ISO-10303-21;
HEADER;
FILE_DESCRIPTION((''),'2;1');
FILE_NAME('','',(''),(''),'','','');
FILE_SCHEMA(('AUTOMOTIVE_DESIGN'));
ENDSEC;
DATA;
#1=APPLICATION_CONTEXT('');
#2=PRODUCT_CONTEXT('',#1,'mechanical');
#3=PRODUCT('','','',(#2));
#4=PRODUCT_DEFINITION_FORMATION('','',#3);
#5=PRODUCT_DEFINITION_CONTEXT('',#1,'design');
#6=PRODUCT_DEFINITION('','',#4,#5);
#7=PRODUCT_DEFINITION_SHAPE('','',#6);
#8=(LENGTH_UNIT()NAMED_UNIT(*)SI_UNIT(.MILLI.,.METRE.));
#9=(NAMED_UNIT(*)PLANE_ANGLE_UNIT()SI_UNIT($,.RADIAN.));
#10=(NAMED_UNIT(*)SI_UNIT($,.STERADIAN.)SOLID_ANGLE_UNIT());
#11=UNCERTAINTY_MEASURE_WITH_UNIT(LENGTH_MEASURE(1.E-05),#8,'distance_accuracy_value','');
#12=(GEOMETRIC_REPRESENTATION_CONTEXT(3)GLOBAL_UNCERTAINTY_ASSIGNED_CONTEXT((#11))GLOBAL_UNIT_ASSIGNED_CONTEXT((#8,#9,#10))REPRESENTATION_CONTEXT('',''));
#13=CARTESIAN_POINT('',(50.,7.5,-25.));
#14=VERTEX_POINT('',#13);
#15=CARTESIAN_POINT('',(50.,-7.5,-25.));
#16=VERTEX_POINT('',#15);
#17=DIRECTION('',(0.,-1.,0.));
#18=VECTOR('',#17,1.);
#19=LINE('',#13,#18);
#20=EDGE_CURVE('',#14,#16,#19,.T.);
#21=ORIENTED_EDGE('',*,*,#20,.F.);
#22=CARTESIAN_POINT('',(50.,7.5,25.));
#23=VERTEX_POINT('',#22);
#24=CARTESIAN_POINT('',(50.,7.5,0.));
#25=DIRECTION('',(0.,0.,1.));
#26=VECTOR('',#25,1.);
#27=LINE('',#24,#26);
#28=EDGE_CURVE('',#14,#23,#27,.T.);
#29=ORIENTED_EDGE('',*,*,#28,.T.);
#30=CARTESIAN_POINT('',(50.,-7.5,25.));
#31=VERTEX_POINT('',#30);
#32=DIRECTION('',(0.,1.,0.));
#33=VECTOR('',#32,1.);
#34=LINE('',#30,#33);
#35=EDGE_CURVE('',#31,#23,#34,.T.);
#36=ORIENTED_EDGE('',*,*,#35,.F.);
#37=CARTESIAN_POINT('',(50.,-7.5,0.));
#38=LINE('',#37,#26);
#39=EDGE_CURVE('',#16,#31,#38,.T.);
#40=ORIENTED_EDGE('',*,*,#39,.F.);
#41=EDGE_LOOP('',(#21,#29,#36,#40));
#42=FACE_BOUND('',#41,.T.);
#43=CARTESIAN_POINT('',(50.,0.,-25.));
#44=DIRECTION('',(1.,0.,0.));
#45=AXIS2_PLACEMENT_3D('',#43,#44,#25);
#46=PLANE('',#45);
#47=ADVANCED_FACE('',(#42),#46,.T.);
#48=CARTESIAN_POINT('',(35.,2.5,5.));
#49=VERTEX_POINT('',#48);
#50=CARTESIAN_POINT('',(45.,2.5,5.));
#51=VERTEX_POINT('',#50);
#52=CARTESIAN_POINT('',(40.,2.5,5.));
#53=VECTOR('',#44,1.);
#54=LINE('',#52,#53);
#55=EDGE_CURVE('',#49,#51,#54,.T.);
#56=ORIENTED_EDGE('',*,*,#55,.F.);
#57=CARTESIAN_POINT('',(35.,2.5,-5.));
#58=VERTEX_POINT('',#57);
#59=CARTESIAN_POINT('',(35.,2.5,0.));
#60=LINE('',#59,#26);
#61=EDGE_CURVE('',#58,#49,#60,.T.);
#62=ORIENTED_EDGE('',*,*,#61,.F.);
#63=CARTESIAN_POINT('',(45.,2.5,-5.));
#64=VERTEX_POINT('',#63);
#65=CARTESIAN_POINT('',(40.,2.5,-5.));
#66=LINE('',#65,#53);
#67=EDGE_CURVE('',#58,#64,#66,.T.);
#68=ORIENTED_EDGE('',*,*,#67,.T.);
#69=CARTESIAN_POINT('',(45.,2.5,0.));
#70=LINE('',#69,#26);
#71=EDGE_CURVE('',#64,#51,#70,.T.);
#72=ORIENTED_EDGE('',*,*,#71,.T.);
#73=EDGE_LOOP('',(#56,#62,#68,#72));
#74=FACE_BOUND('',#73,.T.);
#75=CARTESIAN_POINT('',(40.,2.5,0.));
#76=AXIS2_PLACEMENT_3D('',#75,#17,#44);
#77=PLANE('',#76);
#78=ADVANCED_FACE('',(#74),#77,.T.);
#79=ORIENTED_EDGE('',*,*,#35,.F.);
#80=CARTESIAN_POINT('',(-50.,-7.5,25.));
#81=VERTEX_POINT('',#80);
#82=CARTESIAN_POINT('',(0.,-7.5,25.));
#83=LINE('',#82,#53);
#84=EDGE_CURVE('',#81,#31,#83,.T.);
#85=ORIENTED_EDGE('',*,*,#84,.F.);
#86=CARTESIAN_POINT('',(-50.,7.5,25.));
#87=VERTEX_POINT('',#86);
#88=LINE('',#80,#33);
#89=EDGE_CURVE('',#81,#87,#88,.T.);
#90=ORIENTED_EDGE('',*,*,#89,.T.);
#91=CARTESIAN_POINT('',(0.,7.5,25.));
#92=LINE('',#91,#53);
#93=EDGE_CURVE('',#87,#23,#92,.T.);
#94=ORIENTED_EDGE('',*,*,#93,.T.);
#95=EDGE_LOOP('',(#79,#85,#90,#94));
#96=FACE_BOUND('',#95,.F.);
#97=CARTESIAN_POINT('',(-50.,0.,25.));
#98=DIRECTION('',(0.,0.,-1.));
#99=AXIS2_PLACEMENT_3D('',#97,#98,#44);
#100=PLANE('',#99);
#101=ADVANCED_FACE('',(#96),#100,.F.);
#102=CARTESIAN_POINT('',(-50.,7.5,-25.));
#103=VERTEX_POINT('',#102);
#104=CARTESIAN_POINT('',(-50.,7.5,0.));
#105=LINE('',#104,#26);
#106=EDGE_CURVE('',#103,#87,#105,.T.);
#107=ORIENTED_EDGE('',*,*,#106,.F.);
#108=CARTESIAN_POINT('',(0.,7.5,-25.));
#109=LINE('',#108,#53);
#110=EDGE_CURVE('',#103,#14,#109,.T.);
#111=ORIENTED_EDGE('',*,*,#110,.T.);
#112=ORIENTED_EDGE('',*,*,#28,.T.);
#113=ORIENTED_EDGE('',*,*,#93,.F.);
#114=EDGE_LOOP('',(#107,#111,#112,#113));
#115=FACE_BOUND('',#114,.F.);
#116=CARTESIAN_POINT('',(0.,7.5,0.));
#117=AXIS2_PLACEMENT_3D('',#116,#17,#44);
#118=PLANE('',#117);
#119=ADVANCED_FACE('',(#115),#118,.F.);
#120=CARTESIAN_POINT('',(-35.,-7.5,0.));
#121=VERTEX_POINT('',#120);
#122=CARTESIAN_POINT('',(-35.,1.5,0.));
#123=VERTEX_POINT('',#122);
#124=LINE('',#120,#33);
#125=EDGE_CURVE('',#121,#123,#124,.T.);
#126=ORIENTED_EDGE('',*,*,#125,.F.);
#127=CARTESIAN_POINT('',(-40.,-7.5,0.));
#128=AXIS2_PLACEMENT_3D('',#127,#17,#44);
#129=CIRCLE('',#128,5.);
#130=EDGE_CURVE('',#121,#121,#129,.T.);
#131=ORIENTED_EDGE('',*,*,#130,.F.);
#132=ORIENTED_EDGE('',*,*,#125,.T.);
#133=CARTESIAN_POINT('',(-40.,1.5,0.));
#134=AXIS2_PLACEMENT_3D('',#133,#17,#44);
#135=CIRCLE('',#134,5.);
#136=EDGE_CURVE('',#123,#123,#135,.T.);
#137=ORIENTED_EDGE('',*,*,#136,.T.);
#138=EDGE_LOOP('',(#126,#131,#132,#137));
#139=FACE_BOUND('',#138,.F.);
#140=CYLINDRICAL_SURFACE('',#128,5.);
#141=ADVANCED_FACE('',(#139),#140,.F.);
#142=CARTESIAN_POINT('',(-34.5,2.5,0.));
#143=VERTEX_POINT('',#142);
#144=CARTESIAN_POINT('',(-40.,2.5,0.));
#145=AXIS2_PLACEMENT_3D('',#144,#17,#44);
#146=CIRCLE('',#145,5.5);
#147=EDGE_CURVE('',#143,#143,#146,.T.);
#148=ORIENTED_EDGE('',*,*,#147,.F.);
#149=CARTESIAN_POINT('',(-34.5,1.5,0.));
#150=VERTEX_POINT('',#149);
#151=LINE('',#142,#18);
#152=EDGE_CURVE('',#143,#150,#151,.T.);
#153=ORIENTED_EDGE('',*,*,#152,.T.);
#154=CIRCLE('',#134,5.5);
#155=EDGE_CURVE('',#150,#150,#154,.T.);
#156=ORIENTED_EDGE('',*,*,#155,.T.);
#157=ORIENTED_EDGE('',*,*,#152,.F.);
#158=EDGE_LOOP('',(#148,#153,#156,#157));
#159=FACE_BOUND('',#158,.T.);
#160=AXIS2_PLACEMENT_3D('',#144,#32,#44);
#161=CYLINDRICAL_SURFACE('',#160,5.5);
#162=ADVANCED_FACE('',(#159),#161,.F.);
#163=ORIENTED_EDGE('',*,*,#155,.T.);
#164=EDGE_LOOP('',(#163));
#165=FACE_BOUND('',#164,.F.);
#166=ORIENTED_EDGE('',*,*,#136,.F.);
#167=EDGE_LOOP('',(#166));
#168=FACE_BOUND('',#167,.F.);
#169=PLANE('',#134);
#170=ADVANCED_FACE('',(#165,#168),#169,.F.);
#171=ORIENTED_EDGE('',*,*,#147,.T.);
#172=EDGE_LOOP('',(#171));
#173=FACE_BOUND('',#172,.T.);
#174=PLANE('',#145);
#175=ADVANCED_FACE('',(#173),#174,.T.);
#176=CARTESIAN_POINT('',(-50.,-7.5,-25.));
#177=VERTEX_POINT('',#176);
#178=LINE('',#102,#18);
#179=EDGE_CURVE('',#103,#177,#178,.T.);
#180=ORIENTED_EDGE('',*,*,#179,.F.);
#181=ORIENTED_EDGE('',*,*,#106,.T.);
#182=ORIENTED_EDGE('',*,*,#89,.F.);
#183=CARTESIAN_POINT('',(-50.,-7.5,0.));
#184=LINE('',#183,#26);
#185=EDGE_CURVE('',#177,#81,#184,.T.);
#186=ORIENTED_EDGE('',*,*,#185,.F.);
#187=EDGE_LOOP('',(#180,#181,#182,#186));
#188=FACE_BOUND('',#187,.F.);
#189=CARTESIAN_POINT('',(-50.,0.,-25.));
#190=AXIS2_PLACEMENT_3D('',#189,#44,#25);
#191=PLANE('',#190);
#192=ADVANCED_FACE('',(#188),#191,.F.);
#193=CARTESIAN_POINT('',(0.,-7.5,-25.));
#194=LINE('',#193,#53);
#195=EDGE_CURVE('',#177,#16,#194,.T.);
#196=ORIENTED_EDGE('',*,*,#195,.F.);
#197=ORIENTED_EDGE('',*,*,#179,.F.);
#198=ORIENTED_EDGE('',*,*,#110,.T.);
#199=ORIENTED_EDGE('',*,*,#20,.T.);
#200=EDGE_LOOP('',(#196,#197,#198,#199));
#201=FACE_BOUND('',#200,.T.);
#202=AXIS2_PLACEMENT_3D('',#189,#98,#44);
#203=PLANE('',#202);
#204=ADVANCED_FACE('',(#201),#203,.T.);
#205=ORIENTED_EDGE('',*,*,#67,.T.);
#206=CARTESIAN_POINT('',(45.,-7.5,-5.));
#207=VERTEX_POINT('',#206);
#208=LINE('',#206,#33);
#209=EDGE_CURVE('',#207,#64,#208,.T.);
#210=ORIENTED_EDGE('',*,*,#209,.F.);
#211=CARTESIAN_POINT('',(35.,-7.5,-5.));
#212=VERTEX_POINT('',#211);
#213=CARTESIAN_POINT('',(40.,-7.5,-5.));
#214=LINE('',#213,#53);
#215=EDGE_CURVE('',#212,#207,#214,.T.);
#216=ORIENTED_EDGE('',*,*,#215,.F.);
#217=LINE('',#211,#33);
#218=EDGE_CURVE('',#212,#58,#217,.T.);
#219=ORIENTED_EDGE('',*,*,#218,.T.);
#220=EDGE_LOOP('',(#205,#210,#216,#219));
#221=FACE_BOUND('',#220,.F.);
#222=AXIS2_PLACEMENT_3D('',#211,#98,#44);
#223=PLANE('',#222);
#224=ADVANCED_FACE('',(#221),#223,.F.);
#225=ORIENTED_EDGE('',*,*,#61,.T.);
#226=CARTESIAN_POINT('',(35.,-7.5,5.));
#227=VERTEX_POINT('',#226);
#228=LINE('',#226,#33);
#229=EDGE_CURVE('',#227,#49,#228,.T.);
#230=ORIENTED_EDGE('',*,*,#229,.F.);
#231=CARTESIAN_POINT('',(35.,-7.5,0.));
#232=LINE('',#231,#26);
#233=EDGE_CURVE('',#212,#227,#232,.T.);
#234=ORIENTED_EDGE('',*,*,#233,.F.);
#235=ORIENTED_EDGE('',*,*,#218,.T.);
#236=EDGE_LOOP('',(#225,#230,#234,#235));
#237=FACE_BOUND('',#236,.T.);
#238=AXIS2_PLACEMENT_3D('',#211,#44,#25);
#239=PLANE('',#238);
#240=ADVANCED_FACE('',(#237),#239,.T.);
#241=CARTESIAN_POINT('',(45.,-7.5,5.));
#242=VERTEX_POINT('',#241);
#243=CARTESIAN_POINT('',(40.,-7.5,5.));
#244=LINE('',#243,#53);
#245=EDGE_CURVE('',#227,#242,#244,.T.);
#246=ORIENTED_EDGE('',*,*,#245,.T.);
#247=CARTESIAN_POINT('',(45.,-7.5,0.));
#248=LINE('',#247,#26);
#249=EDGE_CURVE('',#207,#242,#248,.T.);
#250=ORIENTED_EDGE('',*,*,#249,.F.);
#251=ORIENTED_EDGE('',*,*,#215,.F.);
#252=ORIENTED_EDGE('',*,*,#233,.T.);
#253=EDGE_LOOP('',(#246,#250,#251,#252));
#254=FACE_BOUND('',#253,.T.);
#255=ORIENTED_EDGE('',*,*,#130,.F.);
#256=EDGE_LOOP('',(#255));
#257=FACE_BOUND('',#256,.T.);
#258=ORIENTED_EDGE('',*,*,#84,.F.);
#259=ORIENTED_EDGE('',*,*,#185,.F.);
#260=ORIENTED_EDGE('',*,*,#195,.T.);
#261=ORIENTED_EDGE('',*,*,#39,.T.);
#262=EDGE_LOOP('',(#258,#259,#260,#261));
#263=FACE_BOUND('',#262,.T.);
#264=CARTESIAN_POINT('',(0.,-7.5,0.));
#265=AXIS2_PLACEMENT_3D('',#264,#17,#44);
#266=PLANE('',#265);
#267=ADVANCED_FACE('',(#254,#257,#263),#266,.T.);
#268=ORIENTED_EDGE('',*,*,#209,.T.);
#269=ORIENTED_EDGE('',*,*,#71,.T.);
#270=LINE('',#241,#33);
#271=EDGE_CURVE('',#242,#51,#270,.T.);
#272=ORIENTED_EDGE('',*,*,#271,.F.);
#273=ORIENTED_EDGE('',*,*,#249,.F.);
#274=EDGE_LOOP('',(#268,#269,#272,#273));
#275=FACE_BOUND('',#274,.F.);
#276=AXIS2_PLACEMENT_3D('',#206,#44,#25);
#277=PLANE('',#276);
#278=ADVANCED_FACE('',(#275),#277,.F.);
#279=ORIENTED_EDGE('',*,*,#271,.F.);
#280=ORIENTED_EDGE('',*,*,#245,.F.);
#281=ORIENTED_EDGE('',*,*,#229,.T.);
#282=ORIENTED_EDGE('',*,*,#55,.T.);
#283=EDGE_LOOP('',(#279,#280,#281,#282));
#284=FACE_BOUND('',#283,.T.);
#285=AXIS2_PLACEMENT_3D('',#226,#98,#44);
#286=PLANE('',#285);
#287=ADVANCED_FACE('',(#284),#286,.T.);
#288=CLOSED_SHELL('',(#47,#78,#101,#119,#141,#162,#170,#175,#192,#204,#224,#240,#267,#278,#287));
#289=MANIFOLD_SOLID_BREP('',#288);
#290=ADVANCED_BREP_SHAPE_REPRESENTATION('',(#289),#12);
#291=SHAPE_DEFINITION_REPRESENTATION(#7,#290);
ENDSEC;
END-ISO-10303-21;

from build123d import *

# Parameters (mm, degrees)
F0_W     = 100
F0_H     = 50
F1_DEPTH = 7.5
F2_R     = 5
F2_W     = 10
F2_H     = 10
F3_DEPTH = 10
F4_R     = 5.5
F5_DEPTH = 1


# Not quite as in the source:
# - a feature names something its author has since deleted; it is built from what else it names


with BuildPart() as f1:
    # F0 (on Front) → F1 (new body, symmetric)
    with BuildSketch(Plane.XZ):
        Rectangle(F0_W, F0_H)
    extrude(amount=F1_DEPTH, both=True)

    # F2 (on face) → F3 (cut)
    with BuildSketch(Plane.XZ.offset(7.5)):
        with Locations((-40, 0)):
            Circle(F2_R)
        with Locations((40, 0)):
            Rectangle(F2_W, F2_H)
    extrude(amount=-F3_DEPTH, mode=Mode.SUBTRACT)

    # F4 (on face) → F5 (cut)
    with BuildSketch(Plane.XZ.offset(-2.5)):
        with Locations((-40, 0)):
            Circle(F4_R)
    extrude(amount=F5_DEPTH, mode=Mode.SUBTRACT)


solid = f1.part
